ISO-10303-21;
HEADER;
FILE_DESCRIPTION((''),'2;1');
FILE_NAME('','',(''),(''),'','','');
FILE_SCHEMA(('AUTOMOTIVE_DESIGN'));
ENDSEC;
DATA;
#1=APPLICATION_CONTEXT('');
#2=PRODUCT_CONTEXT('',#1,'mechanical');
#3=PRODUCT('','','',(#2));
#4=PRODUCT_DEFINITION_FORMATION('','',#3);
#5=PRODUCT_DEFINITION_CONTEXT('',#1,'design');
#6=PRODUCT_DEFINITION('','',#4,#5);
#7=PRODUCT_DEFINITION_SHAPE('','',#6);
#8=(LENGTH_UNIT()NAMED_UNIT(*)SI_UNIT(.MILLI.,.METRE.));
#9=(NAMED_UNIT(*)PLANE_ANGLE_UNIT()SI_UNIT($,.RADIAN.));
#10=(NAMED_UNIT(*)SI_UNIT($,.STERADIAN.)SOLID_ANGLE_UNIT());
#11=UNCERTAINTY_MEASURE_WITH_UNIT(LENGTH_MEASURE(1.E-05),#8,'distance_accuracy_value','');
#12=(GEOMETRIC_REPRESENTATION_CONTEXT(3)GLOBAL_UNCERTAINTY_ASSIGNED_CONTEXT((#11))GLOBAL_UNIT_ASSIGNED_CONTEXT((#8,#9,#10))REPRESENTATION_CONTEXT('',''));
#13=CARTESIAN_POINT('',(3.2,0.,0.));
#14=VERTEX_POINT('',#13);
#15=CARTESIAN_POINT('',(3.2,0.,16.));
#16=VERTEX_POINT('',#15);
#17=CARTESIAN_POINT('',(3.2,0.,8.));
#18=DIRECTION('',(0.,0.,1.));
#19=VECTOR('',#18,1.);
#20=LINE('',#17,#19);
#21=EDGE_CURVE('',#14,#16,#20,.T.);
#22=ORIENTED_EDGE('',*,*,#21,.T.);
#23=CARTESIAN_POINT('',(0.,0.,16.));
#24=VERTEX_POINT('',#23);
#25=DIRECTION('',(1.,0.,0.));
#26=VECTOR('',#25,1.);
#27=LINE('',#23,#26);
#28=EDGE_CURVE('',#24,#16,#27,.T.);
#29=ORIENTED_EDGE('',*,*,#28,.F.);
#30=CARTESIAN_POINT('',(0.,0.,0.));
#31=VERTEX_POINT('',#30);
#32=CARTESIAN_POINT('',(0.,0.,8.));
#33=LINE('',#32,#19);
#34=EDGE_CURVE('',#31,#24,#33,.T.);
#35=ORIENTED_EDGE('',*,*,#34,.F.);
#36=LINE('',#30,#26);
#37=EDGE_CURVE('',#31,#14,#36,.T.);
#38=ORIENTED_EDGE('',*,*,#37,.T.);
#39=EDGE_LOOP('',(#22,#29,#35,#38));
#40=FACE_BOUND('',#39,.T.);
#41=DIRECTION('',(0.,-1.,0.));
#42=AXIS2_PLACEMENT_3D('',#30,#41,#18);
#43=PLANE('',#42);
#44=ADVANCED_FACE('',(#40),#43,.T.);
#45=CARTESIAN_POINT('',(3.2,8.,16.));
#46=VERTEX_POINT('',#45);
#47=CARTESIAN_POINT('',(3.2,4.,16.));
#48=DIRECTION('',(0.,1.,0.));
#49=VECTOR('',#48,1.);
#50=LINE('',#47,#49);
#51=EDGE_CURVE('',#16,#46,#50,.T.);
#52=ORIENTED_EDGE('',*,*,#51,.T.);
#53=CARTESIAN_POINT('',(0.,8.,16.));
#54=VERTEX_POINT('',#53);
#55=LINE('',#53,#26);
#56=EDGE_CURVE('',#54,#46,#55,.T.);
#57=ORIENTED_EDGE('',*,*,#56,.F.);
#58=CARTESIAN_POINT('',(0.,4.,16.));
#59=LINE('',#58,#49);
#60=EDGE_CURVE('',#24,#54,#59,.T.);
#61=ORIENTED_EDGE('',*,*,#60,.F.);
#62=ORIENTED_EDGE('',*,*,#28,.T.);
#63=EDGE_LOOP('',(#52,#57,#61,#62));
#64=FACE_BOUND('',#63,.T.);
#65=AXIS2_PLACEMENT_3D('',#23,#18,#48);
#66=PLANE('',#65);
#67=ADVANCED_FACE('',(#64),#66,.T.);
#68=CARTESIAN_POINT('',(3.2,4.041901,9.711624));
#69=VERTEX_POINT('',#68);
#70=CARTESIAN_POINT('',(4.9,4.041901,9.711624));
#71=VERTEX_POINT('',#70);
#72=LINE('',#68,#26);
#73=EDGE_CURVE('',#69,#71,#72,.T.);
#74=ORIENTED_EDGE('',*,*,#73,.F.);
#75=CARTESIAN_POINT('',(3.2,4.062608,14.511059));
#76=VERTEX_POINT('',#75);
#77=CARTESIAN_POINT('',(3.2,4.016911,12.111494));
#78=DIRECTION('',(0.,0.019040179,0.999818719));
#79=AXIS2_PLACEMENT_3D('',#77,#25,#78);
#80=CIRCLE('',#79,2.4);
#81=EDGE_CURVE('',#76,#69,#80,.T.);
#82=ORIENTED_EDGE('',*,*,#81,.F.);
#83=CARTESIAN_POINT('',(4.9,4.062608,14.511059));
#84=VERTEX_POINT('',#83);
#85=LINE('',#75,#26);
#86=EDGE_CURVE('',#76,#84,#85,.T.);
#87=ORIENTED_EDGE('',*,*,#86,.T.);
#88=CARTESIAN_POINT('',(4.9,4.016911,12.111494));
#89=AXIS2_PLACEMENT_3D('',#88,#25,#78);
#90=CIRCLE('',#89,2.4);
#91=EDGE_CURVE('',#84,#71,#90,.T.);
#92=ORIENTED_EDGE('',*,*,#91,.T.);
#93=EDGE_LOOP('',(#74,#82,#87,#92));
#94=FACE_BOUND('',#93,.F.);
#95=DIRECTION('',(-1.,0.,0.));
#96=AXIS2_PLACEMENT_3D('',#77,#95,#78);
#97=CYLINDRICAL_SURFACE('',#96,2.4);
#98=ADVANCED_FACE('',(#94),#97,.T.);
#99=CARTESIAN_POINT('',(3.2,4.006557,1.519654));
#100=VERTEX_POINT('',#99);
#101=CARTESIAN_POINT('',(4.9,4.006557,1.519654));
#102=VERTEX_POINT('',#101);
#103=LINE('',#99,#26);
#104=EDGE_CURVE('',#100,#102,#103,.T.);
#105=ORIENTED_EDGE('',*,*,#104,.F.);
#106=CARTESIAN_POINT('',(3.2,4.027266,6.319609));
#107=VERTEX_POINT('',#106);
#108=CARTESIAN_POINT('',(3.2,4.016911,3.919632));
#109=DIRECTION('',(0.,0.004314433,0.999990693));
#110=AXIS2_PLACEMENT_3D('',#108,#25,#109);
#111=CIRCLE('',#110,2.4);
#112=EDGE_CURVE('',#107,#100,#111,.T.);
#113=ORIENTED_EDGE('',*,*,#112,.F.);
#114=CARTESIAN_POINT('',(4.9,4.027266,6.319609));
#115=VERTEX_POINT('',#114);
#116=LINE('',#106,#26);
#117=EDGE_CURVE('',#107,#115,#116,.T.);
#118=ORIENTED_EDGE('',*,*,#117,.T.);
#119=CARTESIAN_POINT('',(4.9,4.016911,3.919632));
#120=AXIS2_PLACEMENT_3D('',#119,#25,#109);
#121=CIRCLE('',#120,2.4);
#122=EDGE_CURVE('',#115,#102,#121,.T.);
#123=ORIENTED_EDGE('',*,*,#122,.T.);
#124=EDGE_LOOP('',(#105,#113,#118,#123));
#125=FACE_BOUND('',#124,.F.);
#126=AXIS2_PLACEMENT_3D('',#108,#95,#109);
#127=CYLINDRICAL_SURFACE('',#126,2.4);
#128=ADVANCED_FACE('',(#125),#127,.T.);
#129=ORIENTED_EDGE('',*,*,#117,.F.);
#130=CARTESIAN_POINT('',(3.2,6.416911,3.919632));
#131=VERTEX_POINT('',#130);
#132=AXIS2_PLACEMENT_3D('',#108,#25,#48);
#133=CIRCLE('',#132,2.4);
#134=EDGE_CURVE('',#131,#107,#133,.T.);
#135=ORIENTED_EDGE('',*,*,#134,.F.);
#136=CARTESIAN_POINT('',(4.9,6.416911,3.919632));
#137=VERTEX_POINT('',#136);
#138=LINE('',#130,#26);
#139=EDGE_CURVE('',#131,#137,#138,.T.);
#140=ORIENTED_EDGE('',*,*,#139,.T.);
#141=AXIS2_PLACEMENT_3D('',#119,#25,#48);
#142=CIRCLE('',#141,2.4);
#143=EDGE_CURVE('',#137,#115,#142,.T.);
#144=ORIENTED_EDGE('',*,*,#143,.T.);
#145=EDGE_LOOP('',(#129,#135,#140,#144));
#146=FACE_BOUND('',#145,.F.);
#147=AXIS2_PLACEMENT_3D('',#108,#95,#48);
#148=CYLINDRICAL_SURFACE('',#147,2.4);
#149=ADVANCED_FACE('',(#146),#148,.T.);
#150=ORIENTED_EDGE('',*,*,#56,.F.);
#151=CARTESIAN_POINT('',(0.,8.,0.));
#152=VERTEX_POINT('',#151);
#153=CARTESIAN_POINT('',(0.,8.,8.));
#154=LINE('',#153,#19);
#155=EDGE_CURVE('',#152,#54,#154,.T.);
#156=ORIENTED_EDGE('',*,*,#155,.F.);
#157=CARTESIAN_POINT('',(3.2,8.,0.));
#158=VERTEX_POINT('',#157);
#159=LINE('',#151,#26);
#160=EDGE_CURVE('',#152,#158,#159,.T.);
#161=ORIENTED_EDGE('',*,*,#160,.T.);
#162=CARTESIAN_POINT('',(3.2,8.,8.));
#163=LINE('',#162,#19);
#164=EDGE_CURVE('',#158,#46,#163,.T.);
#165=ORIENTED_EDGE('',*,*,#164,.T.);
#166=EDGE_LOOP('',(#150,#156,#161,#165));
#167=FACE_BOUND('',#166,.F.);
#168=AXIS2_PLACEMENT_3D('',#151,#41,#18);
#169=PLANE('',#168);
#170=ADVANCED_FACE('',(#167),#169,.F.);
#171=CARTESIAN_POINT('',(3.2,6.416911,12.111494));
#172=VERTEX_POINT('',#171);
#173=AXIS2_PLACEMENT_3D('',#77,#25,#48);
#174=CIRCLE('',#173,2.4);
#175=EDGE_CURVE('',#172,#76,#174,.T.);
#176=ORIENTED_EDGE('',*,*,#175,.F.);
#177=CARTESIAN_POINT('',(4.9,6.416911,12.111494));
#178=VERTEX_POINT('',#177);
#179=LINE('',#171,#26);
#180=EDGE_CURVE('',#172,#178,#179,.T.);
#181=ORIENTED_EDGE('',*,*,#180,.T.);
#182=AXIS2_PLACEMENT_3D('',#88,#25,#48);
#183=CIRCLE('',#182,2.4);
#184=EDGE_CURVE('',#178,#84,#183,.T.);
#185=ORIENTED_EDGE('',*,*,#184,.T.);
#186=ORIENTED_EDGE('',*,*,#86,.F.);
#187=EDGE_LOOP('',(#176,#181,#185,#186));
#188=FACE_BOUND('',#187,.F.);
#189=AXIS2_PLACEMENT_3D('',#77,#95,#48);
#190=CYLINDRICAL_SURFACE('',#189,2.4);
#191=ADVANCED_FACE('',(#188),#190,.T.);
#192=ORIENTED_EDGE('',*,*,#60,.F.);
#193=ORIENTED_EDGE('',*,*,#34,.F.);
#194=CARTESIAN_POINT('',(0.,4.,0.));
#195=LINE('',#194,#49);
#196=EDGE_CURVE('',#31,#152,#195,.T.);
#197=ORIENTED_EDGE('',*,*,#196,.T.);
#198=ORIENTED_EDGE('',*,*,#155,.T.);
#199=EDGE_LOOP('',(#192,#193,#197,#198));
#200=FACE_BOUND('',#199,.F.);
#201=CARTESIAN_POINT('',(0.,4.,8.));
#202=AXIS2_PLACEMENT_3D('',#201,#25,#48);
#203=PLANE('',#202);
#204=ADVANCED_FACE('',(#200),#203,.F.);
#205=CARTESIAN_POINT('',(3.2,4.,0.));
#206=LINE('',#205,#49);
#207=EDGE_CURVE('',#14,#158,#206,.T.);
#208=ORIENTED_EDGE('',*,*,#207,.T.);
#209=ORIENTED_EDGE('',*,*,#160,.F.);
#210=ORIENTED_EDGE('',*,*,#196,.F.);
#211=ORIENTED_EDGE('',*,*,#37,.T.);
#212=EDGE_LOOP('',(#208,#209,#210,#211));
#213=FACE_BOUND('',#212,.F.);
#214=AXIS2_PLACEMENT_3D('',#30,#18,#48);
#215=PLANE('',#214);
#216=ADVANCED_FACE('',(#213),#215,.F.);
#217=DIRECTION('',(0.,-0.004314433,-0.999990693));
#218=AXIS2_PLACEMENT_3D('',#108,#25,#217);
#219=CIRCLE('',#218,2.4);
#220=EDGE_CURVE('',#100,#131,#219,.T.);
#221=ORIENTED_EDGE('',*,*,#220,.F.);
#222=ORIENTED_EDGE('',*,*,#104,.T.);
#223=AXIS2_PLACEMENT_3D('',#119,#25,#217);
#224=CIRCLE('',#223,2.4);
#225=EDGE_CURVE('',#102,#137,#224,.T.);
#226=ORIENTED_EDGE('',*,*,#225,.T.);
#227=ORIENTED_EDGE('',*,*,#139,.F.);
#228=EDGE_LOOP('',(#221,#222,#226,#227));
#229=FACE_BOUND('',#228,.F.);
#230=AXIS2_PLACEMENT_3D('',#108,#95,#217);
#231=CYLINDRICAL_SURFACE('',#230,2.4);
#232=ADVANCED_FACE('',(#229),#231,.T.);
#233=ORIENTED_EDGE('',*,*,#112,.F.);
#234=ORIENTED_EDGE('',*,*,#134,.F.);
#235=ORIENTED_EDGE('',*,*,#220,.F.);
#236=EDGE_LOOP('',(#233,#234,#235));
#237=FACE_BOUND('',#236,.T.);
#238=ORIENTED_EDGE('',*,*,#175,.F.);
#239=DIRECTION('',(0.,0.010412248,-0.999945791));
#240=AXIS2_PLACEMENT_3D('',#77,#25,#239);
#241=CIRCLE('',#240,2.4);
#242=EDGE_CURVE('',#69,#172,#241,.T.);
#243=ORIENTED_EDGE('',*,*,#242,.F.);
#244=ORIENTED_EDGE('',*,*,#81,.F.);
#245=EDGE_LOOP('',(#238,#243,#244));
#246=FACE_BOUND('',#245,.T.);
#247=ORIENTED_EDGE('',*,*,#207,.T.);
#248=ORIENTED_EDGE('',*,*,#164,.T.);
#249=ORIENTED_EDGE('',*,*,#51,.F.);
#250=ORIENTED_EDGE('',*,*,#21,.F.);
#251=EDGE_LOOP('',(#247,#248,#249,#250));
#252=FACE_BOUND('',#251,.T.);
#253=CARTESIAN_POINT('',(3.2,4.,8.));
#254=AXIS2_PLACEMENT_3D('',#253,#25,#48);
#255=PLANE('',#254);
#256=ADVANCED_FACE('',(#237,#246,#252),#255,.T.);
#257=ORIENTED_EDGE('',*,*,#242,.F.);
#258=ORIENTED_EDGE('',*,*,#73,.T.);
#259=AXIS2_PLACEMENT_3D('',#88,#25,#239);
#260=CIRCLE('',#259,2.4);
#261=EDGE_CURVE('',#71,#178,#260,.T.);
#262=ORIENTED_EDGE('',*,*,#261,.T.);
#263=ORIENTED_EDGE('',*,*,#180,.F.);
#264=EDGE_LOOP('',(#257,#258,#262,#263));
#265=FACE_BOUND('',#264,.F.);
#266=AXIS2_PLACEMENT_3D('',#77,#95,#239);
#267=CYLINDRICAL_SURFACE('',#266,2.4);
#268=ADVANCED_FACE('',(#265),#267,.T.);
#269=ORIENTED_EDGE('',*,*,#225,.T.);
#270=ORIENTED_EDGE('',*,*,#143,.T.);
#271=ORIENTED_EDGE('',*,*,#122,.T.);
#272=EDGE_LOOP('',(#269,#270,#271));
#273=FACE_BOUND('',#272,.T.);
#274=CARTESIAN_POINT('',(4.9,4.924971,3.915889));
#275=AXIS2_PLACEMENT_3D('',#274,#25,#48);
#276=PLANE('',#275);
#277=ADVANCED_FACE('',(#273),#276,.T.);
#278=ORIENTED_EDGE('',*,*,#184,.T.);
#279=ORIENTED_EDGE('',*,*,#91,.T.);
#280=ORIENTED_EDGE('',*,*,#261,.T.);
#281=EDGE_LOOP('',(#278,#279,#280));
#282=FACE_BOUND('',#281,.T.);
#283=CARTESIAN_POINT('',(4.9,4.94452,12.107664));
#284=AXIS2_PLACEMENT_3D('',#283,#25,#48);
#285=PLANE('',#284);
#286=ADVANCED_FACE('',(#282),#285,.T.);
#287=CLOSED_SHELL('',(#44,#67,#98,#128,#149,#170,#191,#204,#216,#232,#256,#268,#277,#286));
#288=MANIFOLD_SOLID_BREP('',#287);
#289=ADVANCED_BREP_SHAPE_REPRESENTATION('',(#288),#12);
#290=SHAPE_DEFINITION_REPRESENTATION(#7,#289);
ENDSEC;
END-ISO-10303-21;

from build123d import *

# Parameters (mm, degrees)
F0_W     = 8
F0_H     = 16
F1_DEPTH = 3.2
F3_DEPTH = 1.7


# Not quite as in the source:
# - a feature names something its author has since deleted; it is built from what else it names


with BuildPart() as f1:
    # F0 (on Right) → F1 (new body)
    with BuildSketch(Plane.YZ):
        with Locations((4, 8)):
            Rectangle(F0_W, F0_H)
    extrude(amount=F1_DEPTH)

    # F2 (on face) → F3 (join)
    with BuildSketch(Plane.YZ.offset(3.2)):
        with BuildLine():
            ThreePointArc((4.0419005416, 9.7116244191), (5.7227796266, 10.4232962474), (6.4169111453, 12.1114943177))
            ThreePointArc((6.4169111453, 12.1114943177), (5.730047367, 13.7923168204), (4.0626075738, 14.5110592441))
            Line((4.0626075738, 14.5110592441), (4.0419005416, 9.7116244191))
        make_face()
        with BuildLine():
            Line((4.0419005416, 9.7116244191), (4.0626075738, 14.5110592441))
            ThreePointArc((4.0626075738, 14.5110592441), (1.6169334826, 12.1218489566), (4.0419005416, 9.7116244191))
        make_face()
        with BuildLine():
            ThreePointArc((6.4169111453, 3.9196317084), (5.7176243976, 5.6130231083), (4.0272657842, 6.3196093711))
            Line((4.0272657842, 6.3196093711), (4.0272298946, 6.3112909609))
            Line((4.0272298946, 6.3112909609), (4.0065565064, 1.5196540457))
            ThreePointArc((4.0065565064, 1.5196540457), (5.7103025452, 2.2189184561), (6.4169111453, 3.9196317084))
        make_face()
        with BuildLine():
            Line((4.0272298946, 6.3112909609), (4.0272657842, 6.3196093711))
            ThreePointArc((4.0272657842, 6.3196093711), (1.6169334826, 3.9299863473), (4.0065565064, 1.5196540457))
            Line((4.0065565064, 1.5196540457), (4.0272298946, 6.3112909609))
        make_face()
    extrude(amount=F3_DEPTH)


solid = f1.part
